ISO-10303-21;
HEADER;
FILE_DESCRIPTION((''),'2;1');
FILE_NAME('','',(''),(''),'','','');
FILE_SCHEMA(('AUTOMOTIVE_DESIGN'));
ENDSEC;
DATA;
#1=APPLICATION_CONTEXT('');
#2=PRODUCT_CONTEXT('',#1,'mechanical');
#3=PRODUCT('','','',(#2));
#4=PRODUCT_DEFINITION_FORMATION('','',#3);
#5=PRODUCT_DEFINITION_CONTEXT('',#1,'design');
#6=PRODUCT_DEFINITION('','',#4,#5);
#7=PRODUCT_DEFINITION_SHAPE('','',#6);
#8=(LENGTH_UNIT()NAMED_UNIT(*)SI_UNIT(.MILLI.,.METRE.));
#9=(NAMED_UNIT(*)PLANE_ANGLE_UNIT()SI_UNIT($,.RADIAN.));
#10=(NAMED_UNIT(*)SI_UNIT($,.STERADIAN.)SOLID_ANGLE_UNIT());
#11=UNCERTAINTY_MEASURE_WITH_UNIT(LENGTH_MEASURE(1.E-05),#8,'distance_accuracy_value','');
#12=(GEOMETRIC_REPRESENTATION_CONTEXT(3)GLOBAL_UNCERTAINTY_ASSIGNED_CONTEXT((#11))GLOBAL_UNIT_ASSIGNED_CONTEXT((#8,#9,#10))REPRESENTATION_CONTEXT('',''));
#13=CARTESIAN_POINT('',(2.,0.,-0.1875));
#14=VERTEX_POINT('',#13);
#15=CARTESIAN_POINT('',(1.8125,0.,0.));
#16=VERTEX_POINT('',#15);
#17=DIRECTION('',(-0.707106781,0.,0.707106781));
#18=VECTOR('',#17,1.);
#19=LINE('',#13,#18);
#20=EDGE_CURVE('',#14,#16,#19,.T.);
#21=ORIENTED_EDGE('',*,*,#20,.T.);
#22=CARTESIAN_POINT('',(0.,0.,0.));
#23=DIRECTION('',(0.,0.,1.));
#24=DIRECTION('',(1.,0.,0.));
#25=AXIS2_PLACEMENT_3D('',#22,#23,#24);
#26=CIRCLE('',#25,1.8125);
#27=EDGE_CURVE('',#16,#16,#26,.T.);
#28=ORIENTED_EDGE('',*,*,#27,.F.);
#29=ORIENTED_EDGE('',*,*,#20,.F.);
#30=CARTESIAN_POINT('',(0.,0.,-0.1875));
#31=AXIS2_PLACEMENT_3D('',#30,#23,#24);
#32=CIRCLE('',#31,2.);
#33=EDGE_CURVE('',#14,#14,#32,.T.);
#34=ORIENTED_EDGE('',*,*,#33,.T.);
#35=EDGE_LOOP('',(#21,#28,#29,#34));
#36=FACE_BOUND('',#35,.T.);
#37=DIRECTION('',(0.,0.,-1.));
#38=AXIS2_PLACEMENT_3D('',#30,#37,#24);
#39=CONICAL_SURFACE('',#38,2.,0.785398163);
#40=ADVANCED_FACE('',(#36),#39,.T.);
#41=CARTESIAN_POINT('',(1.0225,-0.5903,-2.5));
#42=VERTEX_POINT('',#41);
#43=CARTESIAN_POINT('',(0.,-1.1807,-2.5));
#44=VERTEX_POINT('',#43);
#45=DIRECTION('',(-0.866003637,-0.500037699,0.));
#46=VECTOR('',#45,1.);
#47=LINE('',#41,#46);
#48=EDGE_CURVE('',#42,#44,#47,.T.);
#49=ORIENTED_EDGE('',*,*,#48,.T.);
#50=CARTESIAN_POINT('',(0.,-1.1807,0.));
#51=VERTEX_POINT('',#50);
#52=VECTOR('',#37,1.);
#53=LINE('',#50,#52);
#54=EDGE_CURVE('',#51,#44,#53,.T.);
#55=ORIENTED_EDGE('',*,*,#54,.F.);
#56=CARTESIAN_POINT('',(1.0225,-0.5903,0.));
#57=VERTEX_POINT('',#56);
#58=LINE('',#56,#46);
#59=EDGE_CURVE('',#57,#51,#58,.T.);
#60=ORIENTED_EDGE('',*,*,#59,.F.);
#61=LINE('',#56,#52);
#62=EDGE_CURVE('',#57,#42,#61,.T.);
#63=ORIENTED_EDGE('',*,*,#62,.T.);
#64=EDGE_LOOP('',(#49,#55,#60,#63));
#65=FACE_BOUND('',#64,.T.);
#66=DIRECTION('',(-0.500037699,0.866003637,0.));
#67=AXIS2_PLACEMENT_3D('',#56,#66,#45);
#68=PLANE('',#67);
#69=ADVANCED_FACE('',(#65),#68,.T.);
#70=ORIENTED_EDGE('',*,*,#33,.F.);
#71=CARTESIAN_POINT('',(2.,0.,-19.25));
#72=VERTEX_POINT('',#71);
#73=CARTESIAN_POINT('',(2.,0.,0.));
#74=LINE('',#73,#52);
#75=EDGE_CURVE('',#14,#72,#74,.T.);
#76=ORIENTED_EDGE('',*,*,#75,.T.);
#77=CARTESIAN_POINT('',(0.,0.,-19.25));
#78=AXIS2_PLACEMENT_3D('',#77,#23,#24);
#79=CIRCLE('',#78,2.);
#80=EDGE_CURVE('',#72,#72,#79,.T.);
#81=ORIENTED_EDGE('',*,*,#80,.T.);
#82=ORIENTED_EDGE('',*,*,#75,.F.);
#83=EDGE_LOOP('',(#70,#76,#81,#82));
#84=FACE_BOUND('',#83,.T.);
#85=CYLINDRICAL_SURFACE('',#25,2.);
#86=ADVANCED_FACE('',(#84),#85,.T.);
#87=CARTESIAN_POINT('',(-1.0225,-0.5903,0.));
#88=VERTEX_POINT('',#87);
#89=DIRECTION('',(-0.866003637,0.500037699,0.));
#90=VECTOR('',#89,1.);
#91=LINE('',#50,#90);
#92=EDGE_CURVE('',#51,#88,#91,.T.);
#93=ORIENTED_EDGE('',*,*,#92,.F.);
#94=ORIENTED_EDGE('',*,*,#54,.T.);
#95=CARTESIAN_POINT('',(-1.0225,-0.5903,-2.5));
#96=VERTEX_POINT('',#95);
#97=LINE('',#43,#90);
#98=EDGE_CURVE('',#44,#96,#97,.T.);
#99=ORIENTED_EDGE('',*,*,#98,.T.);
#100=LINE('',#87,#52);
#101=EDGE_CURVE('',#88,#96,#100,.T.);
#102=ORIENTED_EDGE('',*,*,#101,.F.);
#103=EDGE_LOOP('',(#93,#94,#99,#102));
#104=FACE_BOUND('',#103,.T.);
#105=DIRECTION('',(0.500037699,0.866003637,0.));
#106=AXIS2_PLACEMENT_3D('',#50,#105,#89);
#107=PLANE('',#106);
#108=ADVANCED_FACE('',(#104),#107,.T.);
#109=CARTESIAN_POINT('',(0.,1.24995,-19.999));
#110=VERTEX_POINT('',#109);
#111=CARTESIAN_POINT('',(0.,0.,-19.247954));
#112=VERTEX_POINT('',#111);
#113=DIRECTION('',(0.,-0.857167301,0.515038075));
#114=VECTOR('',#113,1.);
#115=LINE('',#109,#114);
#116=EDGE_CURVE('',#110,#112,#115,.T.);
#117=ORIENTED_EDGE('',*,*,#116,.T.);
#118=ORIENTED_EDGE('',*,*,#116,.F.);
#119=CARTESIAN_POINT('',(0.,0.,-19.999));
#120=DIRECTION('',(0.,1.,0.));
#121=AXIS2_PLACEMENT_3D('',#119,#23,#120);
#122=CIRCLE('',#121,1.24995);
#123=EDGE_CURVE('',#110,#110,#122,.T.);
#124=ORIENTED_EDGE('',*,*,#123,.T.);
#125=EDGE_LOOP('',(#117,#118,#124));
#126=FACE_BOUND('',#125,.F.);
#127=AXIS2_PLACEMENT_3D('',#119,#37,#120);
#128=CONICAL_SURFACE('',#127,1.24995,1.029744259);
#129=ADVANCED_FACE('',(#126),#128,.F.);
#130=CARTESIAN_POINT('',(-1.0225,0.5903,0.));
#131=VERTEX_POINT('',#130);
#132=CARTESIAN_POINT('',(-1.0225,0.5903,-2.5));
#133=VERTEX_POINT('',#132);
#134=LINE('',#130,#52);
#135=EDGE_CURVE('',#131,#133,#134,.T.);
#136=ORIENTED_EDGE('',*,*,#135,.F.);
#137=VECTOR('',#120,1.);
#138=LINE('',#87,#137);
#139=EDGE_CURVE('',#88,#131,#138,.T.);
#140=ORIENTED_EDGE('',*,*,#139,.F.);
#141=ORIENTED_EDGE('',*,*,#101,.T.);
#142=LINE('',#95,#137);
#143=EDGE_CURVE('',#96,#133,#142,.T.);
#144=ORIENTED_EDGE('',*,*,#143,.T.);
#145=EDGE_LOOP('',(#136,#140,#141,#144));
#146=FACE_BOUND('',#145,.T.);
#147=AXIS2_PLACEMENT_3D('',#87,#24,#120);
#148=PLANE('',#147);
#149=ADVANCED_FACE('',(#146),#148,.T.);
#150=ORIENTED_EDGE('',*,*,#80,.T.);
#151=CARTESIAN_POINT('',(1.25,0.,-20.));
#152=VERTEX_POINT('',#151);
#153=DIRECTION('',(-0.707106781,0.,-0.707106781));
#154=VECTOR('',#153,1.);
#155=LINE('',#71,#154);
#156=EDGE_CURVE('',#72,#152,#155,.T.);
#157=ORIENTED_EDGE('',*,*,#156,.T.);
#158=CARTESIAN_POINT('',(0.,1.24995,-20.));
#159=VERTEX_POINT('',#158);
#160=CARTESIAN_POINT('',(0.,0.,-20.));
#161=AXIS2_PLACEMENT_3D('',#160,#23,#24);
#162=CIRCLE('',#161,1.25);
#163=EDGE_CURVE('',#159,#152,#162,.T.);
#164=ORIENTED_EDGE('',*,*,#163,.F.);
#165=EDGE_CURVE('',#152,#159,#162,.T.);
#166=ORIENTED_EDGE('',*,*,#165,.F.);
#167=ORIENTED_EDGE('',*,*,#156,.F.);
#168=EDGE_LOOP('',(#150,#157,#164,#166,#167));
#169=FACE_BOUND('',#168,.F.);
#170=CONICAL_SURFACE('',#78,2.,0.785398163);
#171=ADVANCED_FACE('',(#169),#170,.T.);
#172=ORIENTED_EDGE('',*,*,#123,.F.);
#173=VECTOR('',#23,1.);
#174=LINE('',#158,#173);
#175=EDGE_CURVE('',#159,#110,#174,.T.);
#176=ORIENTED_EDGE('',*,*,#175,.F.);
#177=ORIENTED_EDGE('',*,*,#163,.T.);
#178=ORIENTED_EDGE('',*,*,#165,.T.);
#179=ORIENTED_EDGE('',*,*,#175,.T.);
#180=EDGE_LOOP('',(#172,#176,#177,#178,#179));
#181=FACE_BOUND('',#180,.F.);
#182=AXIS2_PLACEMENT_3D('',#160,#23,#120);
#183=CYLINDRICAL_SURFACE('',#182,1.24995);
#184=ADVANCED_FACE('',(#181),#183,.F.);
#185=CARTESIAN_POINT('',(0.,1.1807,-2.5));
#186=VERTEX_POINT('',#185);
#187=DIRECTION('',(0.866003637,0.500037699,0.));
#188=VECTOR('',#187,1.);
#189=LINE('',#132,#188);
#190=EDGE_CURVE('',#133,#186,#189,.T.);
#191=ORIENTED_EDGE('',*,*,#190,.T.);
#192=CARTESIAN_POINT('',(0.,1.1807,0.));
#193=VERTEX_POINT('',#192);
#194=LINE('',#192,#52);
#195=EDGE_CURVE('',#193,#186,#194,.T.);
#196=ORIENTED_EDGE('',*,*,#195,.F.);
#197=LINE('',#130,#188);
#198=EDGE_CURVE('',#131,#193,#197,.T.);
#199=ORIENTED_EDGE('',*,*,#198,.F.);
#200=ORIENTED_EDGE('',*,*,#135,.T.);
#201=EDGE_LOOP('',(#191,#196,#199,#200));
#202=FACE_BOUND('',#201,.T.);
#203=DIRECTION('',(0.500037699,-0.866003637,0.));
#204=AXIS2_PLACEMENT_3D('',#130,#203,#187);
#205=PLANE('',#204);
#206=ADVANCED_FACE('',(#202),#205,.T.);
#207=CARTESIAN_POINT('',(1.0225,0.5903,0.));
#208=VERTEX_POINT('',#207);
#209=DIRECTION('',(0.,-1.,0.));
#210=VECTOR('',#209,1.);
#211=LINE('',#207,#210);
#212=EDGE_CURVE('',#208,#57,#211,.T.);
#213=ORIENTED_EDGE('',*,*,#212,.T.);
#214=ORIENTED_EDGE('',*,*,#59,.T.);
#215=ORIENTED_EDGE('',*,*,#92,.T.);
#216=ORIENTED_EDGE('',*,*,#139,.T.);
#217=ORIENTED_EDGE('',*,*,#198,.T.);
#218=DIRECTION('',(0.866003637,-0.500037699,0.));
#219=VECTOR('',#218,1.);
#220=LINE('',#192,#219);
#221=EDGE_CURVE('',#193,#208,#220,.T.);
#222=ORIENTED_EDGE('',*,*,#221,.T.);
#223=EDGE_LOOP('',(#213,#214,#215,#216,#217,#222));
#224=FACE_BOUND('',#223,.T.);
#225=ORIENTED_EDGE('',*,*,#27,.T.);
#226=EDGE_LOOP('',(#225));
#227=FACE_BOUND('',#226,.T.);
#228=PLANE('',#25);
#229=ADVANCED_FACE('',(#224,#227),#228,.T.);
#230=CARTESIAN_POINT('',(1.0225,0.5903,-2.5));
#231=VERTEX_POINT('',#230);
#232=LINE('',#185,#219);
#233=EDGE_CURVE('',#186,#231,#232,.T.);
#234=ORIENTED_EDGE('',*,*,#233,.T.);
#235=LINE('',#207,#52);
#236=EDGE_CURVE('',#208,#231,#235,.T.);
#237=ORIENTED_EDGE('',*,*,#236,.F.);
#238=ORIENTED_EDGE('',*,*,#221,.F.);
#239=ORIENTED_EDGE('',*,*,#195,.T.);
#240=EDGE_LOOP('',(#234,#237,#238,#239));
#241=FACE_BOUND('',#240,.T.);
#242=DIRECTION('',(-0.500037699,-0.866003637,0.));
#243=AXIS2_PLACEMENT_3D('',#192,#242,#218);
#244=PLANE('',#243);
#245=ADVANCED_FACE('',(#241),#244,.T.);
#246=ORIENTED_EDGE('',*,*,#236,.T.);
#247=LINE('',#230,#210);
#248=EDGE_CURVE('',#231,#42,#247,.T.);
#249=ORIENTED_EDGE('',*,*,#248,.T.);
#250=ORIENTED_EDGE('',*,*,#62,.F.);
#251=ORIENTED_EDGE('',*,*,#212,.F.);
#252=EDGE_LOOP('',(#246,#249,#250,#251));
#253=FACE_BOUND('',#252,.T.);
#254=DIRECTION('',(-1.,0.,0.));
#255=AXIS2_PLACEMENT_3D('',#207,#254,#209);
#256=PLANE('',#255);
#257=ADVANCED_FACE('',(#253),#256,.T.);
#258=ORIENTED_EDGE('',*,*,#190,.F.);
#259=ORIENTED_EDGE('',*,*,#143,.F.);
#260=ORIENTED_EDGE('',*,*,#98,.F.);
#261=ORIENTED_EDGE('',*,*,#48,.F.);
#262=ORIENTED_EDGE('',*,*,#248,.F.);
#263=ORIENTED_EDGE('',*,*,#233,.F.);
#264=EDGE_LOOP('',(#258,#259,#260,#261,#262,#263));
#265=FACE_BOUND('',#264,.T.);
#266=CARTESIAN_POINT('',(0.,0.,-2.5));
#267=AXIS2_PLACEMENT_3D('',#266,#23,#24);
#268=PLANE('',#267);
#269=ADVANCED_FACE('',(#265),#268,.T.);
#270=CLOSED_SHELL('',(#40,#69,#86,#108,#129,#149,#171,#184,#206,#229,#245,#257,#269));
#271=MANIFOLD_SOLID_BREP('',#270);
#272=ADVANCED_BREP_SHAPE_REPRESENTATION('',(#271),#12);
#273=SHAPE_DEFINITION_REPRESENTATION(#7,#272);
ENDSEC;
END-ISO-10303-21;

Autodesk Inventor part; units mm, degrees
ref_plane "YZ Plane" through (0, 0, 0) normal (1, 0, 0) x (0, 1, 0)
ref_plane "XZ Plane" through (0, 0, 0) normal (0, 1, 0) x (-1, 0, 0)
ref_plane "XY Plane" through (0, 0, 0) normal (0, 0, 1) x (1, 0, 0)
sketch "Sketch3" plane through (0, 0, 0) normal (0, 0, 1) x (1, 0, 0)
  circle A0 centre (0, 0) radius 2 projected
  line L0 (1.0225, 0.5903) -> (1.0225, -0.5903)
  line L1 (1.0225, -0.5903) -> (0, -1.1807)
  line L2 (0, -1.1807) -> (-1.0225, -0.5903)
  line L3 (-1.0225, -0.5903) -> (-1.0225, 0.5903)
  line L4 (-1.0225, 0.5903) -> (0, 1.1807)
  line L5 (0, 1.1807) -> (1.0225, 0.5903)
  line L6 (0, 0) -> (0, 1.1807) construction
  dimension "HexWidth" = 2.045
sketch "Sketch2" plane through (0, 0, 0) normal (0, 0, 1) x (1, 0, 0)
  circle A0 centre (0, 0) radius 2
  dimension "Diam" = 4
extrude "Extrusion2" add sketch "Sketch2" against normal blind 20
thread "Thread1" size "M4x0.7" class "6g" standard "ANSI Metric M Profile" full length
extrude "Extrusion3" cut sketch "Sketch3" against normal blind 2.5 contours L0 L1 L2 L3 L4 L5
chamfer "Chamfer2" distance 0.75 angle 45 1 edges at (-2, 0, -20)
chamfer "Chamfer3" distance 0.1875 angle 45 1 edges at (-2, 0, 0)
sketch "Sketch4" plane through (0, 0, -20) normal (0, 0, -1) x (-1, 0, 0)
  circle A0 centre (0, 0) radius 1.8125 projected
hole "Cup_Point_Hole1" at (0, 0, -20) direction (0, 0, 1) diameter 2.4999 depth 0.001 tip angle 118
equation "\"d8\" = -0.5 * CupPointDiam + 0.5 * Diam"
equation "\"d11\" = 0.25 * d8"
equation "\"CupPointDiam\" = 2.5"
properties part number "SCREW,SET,CUP POINT,P, 8.8, M4X0.7X20MM" material "Steel, MS"
